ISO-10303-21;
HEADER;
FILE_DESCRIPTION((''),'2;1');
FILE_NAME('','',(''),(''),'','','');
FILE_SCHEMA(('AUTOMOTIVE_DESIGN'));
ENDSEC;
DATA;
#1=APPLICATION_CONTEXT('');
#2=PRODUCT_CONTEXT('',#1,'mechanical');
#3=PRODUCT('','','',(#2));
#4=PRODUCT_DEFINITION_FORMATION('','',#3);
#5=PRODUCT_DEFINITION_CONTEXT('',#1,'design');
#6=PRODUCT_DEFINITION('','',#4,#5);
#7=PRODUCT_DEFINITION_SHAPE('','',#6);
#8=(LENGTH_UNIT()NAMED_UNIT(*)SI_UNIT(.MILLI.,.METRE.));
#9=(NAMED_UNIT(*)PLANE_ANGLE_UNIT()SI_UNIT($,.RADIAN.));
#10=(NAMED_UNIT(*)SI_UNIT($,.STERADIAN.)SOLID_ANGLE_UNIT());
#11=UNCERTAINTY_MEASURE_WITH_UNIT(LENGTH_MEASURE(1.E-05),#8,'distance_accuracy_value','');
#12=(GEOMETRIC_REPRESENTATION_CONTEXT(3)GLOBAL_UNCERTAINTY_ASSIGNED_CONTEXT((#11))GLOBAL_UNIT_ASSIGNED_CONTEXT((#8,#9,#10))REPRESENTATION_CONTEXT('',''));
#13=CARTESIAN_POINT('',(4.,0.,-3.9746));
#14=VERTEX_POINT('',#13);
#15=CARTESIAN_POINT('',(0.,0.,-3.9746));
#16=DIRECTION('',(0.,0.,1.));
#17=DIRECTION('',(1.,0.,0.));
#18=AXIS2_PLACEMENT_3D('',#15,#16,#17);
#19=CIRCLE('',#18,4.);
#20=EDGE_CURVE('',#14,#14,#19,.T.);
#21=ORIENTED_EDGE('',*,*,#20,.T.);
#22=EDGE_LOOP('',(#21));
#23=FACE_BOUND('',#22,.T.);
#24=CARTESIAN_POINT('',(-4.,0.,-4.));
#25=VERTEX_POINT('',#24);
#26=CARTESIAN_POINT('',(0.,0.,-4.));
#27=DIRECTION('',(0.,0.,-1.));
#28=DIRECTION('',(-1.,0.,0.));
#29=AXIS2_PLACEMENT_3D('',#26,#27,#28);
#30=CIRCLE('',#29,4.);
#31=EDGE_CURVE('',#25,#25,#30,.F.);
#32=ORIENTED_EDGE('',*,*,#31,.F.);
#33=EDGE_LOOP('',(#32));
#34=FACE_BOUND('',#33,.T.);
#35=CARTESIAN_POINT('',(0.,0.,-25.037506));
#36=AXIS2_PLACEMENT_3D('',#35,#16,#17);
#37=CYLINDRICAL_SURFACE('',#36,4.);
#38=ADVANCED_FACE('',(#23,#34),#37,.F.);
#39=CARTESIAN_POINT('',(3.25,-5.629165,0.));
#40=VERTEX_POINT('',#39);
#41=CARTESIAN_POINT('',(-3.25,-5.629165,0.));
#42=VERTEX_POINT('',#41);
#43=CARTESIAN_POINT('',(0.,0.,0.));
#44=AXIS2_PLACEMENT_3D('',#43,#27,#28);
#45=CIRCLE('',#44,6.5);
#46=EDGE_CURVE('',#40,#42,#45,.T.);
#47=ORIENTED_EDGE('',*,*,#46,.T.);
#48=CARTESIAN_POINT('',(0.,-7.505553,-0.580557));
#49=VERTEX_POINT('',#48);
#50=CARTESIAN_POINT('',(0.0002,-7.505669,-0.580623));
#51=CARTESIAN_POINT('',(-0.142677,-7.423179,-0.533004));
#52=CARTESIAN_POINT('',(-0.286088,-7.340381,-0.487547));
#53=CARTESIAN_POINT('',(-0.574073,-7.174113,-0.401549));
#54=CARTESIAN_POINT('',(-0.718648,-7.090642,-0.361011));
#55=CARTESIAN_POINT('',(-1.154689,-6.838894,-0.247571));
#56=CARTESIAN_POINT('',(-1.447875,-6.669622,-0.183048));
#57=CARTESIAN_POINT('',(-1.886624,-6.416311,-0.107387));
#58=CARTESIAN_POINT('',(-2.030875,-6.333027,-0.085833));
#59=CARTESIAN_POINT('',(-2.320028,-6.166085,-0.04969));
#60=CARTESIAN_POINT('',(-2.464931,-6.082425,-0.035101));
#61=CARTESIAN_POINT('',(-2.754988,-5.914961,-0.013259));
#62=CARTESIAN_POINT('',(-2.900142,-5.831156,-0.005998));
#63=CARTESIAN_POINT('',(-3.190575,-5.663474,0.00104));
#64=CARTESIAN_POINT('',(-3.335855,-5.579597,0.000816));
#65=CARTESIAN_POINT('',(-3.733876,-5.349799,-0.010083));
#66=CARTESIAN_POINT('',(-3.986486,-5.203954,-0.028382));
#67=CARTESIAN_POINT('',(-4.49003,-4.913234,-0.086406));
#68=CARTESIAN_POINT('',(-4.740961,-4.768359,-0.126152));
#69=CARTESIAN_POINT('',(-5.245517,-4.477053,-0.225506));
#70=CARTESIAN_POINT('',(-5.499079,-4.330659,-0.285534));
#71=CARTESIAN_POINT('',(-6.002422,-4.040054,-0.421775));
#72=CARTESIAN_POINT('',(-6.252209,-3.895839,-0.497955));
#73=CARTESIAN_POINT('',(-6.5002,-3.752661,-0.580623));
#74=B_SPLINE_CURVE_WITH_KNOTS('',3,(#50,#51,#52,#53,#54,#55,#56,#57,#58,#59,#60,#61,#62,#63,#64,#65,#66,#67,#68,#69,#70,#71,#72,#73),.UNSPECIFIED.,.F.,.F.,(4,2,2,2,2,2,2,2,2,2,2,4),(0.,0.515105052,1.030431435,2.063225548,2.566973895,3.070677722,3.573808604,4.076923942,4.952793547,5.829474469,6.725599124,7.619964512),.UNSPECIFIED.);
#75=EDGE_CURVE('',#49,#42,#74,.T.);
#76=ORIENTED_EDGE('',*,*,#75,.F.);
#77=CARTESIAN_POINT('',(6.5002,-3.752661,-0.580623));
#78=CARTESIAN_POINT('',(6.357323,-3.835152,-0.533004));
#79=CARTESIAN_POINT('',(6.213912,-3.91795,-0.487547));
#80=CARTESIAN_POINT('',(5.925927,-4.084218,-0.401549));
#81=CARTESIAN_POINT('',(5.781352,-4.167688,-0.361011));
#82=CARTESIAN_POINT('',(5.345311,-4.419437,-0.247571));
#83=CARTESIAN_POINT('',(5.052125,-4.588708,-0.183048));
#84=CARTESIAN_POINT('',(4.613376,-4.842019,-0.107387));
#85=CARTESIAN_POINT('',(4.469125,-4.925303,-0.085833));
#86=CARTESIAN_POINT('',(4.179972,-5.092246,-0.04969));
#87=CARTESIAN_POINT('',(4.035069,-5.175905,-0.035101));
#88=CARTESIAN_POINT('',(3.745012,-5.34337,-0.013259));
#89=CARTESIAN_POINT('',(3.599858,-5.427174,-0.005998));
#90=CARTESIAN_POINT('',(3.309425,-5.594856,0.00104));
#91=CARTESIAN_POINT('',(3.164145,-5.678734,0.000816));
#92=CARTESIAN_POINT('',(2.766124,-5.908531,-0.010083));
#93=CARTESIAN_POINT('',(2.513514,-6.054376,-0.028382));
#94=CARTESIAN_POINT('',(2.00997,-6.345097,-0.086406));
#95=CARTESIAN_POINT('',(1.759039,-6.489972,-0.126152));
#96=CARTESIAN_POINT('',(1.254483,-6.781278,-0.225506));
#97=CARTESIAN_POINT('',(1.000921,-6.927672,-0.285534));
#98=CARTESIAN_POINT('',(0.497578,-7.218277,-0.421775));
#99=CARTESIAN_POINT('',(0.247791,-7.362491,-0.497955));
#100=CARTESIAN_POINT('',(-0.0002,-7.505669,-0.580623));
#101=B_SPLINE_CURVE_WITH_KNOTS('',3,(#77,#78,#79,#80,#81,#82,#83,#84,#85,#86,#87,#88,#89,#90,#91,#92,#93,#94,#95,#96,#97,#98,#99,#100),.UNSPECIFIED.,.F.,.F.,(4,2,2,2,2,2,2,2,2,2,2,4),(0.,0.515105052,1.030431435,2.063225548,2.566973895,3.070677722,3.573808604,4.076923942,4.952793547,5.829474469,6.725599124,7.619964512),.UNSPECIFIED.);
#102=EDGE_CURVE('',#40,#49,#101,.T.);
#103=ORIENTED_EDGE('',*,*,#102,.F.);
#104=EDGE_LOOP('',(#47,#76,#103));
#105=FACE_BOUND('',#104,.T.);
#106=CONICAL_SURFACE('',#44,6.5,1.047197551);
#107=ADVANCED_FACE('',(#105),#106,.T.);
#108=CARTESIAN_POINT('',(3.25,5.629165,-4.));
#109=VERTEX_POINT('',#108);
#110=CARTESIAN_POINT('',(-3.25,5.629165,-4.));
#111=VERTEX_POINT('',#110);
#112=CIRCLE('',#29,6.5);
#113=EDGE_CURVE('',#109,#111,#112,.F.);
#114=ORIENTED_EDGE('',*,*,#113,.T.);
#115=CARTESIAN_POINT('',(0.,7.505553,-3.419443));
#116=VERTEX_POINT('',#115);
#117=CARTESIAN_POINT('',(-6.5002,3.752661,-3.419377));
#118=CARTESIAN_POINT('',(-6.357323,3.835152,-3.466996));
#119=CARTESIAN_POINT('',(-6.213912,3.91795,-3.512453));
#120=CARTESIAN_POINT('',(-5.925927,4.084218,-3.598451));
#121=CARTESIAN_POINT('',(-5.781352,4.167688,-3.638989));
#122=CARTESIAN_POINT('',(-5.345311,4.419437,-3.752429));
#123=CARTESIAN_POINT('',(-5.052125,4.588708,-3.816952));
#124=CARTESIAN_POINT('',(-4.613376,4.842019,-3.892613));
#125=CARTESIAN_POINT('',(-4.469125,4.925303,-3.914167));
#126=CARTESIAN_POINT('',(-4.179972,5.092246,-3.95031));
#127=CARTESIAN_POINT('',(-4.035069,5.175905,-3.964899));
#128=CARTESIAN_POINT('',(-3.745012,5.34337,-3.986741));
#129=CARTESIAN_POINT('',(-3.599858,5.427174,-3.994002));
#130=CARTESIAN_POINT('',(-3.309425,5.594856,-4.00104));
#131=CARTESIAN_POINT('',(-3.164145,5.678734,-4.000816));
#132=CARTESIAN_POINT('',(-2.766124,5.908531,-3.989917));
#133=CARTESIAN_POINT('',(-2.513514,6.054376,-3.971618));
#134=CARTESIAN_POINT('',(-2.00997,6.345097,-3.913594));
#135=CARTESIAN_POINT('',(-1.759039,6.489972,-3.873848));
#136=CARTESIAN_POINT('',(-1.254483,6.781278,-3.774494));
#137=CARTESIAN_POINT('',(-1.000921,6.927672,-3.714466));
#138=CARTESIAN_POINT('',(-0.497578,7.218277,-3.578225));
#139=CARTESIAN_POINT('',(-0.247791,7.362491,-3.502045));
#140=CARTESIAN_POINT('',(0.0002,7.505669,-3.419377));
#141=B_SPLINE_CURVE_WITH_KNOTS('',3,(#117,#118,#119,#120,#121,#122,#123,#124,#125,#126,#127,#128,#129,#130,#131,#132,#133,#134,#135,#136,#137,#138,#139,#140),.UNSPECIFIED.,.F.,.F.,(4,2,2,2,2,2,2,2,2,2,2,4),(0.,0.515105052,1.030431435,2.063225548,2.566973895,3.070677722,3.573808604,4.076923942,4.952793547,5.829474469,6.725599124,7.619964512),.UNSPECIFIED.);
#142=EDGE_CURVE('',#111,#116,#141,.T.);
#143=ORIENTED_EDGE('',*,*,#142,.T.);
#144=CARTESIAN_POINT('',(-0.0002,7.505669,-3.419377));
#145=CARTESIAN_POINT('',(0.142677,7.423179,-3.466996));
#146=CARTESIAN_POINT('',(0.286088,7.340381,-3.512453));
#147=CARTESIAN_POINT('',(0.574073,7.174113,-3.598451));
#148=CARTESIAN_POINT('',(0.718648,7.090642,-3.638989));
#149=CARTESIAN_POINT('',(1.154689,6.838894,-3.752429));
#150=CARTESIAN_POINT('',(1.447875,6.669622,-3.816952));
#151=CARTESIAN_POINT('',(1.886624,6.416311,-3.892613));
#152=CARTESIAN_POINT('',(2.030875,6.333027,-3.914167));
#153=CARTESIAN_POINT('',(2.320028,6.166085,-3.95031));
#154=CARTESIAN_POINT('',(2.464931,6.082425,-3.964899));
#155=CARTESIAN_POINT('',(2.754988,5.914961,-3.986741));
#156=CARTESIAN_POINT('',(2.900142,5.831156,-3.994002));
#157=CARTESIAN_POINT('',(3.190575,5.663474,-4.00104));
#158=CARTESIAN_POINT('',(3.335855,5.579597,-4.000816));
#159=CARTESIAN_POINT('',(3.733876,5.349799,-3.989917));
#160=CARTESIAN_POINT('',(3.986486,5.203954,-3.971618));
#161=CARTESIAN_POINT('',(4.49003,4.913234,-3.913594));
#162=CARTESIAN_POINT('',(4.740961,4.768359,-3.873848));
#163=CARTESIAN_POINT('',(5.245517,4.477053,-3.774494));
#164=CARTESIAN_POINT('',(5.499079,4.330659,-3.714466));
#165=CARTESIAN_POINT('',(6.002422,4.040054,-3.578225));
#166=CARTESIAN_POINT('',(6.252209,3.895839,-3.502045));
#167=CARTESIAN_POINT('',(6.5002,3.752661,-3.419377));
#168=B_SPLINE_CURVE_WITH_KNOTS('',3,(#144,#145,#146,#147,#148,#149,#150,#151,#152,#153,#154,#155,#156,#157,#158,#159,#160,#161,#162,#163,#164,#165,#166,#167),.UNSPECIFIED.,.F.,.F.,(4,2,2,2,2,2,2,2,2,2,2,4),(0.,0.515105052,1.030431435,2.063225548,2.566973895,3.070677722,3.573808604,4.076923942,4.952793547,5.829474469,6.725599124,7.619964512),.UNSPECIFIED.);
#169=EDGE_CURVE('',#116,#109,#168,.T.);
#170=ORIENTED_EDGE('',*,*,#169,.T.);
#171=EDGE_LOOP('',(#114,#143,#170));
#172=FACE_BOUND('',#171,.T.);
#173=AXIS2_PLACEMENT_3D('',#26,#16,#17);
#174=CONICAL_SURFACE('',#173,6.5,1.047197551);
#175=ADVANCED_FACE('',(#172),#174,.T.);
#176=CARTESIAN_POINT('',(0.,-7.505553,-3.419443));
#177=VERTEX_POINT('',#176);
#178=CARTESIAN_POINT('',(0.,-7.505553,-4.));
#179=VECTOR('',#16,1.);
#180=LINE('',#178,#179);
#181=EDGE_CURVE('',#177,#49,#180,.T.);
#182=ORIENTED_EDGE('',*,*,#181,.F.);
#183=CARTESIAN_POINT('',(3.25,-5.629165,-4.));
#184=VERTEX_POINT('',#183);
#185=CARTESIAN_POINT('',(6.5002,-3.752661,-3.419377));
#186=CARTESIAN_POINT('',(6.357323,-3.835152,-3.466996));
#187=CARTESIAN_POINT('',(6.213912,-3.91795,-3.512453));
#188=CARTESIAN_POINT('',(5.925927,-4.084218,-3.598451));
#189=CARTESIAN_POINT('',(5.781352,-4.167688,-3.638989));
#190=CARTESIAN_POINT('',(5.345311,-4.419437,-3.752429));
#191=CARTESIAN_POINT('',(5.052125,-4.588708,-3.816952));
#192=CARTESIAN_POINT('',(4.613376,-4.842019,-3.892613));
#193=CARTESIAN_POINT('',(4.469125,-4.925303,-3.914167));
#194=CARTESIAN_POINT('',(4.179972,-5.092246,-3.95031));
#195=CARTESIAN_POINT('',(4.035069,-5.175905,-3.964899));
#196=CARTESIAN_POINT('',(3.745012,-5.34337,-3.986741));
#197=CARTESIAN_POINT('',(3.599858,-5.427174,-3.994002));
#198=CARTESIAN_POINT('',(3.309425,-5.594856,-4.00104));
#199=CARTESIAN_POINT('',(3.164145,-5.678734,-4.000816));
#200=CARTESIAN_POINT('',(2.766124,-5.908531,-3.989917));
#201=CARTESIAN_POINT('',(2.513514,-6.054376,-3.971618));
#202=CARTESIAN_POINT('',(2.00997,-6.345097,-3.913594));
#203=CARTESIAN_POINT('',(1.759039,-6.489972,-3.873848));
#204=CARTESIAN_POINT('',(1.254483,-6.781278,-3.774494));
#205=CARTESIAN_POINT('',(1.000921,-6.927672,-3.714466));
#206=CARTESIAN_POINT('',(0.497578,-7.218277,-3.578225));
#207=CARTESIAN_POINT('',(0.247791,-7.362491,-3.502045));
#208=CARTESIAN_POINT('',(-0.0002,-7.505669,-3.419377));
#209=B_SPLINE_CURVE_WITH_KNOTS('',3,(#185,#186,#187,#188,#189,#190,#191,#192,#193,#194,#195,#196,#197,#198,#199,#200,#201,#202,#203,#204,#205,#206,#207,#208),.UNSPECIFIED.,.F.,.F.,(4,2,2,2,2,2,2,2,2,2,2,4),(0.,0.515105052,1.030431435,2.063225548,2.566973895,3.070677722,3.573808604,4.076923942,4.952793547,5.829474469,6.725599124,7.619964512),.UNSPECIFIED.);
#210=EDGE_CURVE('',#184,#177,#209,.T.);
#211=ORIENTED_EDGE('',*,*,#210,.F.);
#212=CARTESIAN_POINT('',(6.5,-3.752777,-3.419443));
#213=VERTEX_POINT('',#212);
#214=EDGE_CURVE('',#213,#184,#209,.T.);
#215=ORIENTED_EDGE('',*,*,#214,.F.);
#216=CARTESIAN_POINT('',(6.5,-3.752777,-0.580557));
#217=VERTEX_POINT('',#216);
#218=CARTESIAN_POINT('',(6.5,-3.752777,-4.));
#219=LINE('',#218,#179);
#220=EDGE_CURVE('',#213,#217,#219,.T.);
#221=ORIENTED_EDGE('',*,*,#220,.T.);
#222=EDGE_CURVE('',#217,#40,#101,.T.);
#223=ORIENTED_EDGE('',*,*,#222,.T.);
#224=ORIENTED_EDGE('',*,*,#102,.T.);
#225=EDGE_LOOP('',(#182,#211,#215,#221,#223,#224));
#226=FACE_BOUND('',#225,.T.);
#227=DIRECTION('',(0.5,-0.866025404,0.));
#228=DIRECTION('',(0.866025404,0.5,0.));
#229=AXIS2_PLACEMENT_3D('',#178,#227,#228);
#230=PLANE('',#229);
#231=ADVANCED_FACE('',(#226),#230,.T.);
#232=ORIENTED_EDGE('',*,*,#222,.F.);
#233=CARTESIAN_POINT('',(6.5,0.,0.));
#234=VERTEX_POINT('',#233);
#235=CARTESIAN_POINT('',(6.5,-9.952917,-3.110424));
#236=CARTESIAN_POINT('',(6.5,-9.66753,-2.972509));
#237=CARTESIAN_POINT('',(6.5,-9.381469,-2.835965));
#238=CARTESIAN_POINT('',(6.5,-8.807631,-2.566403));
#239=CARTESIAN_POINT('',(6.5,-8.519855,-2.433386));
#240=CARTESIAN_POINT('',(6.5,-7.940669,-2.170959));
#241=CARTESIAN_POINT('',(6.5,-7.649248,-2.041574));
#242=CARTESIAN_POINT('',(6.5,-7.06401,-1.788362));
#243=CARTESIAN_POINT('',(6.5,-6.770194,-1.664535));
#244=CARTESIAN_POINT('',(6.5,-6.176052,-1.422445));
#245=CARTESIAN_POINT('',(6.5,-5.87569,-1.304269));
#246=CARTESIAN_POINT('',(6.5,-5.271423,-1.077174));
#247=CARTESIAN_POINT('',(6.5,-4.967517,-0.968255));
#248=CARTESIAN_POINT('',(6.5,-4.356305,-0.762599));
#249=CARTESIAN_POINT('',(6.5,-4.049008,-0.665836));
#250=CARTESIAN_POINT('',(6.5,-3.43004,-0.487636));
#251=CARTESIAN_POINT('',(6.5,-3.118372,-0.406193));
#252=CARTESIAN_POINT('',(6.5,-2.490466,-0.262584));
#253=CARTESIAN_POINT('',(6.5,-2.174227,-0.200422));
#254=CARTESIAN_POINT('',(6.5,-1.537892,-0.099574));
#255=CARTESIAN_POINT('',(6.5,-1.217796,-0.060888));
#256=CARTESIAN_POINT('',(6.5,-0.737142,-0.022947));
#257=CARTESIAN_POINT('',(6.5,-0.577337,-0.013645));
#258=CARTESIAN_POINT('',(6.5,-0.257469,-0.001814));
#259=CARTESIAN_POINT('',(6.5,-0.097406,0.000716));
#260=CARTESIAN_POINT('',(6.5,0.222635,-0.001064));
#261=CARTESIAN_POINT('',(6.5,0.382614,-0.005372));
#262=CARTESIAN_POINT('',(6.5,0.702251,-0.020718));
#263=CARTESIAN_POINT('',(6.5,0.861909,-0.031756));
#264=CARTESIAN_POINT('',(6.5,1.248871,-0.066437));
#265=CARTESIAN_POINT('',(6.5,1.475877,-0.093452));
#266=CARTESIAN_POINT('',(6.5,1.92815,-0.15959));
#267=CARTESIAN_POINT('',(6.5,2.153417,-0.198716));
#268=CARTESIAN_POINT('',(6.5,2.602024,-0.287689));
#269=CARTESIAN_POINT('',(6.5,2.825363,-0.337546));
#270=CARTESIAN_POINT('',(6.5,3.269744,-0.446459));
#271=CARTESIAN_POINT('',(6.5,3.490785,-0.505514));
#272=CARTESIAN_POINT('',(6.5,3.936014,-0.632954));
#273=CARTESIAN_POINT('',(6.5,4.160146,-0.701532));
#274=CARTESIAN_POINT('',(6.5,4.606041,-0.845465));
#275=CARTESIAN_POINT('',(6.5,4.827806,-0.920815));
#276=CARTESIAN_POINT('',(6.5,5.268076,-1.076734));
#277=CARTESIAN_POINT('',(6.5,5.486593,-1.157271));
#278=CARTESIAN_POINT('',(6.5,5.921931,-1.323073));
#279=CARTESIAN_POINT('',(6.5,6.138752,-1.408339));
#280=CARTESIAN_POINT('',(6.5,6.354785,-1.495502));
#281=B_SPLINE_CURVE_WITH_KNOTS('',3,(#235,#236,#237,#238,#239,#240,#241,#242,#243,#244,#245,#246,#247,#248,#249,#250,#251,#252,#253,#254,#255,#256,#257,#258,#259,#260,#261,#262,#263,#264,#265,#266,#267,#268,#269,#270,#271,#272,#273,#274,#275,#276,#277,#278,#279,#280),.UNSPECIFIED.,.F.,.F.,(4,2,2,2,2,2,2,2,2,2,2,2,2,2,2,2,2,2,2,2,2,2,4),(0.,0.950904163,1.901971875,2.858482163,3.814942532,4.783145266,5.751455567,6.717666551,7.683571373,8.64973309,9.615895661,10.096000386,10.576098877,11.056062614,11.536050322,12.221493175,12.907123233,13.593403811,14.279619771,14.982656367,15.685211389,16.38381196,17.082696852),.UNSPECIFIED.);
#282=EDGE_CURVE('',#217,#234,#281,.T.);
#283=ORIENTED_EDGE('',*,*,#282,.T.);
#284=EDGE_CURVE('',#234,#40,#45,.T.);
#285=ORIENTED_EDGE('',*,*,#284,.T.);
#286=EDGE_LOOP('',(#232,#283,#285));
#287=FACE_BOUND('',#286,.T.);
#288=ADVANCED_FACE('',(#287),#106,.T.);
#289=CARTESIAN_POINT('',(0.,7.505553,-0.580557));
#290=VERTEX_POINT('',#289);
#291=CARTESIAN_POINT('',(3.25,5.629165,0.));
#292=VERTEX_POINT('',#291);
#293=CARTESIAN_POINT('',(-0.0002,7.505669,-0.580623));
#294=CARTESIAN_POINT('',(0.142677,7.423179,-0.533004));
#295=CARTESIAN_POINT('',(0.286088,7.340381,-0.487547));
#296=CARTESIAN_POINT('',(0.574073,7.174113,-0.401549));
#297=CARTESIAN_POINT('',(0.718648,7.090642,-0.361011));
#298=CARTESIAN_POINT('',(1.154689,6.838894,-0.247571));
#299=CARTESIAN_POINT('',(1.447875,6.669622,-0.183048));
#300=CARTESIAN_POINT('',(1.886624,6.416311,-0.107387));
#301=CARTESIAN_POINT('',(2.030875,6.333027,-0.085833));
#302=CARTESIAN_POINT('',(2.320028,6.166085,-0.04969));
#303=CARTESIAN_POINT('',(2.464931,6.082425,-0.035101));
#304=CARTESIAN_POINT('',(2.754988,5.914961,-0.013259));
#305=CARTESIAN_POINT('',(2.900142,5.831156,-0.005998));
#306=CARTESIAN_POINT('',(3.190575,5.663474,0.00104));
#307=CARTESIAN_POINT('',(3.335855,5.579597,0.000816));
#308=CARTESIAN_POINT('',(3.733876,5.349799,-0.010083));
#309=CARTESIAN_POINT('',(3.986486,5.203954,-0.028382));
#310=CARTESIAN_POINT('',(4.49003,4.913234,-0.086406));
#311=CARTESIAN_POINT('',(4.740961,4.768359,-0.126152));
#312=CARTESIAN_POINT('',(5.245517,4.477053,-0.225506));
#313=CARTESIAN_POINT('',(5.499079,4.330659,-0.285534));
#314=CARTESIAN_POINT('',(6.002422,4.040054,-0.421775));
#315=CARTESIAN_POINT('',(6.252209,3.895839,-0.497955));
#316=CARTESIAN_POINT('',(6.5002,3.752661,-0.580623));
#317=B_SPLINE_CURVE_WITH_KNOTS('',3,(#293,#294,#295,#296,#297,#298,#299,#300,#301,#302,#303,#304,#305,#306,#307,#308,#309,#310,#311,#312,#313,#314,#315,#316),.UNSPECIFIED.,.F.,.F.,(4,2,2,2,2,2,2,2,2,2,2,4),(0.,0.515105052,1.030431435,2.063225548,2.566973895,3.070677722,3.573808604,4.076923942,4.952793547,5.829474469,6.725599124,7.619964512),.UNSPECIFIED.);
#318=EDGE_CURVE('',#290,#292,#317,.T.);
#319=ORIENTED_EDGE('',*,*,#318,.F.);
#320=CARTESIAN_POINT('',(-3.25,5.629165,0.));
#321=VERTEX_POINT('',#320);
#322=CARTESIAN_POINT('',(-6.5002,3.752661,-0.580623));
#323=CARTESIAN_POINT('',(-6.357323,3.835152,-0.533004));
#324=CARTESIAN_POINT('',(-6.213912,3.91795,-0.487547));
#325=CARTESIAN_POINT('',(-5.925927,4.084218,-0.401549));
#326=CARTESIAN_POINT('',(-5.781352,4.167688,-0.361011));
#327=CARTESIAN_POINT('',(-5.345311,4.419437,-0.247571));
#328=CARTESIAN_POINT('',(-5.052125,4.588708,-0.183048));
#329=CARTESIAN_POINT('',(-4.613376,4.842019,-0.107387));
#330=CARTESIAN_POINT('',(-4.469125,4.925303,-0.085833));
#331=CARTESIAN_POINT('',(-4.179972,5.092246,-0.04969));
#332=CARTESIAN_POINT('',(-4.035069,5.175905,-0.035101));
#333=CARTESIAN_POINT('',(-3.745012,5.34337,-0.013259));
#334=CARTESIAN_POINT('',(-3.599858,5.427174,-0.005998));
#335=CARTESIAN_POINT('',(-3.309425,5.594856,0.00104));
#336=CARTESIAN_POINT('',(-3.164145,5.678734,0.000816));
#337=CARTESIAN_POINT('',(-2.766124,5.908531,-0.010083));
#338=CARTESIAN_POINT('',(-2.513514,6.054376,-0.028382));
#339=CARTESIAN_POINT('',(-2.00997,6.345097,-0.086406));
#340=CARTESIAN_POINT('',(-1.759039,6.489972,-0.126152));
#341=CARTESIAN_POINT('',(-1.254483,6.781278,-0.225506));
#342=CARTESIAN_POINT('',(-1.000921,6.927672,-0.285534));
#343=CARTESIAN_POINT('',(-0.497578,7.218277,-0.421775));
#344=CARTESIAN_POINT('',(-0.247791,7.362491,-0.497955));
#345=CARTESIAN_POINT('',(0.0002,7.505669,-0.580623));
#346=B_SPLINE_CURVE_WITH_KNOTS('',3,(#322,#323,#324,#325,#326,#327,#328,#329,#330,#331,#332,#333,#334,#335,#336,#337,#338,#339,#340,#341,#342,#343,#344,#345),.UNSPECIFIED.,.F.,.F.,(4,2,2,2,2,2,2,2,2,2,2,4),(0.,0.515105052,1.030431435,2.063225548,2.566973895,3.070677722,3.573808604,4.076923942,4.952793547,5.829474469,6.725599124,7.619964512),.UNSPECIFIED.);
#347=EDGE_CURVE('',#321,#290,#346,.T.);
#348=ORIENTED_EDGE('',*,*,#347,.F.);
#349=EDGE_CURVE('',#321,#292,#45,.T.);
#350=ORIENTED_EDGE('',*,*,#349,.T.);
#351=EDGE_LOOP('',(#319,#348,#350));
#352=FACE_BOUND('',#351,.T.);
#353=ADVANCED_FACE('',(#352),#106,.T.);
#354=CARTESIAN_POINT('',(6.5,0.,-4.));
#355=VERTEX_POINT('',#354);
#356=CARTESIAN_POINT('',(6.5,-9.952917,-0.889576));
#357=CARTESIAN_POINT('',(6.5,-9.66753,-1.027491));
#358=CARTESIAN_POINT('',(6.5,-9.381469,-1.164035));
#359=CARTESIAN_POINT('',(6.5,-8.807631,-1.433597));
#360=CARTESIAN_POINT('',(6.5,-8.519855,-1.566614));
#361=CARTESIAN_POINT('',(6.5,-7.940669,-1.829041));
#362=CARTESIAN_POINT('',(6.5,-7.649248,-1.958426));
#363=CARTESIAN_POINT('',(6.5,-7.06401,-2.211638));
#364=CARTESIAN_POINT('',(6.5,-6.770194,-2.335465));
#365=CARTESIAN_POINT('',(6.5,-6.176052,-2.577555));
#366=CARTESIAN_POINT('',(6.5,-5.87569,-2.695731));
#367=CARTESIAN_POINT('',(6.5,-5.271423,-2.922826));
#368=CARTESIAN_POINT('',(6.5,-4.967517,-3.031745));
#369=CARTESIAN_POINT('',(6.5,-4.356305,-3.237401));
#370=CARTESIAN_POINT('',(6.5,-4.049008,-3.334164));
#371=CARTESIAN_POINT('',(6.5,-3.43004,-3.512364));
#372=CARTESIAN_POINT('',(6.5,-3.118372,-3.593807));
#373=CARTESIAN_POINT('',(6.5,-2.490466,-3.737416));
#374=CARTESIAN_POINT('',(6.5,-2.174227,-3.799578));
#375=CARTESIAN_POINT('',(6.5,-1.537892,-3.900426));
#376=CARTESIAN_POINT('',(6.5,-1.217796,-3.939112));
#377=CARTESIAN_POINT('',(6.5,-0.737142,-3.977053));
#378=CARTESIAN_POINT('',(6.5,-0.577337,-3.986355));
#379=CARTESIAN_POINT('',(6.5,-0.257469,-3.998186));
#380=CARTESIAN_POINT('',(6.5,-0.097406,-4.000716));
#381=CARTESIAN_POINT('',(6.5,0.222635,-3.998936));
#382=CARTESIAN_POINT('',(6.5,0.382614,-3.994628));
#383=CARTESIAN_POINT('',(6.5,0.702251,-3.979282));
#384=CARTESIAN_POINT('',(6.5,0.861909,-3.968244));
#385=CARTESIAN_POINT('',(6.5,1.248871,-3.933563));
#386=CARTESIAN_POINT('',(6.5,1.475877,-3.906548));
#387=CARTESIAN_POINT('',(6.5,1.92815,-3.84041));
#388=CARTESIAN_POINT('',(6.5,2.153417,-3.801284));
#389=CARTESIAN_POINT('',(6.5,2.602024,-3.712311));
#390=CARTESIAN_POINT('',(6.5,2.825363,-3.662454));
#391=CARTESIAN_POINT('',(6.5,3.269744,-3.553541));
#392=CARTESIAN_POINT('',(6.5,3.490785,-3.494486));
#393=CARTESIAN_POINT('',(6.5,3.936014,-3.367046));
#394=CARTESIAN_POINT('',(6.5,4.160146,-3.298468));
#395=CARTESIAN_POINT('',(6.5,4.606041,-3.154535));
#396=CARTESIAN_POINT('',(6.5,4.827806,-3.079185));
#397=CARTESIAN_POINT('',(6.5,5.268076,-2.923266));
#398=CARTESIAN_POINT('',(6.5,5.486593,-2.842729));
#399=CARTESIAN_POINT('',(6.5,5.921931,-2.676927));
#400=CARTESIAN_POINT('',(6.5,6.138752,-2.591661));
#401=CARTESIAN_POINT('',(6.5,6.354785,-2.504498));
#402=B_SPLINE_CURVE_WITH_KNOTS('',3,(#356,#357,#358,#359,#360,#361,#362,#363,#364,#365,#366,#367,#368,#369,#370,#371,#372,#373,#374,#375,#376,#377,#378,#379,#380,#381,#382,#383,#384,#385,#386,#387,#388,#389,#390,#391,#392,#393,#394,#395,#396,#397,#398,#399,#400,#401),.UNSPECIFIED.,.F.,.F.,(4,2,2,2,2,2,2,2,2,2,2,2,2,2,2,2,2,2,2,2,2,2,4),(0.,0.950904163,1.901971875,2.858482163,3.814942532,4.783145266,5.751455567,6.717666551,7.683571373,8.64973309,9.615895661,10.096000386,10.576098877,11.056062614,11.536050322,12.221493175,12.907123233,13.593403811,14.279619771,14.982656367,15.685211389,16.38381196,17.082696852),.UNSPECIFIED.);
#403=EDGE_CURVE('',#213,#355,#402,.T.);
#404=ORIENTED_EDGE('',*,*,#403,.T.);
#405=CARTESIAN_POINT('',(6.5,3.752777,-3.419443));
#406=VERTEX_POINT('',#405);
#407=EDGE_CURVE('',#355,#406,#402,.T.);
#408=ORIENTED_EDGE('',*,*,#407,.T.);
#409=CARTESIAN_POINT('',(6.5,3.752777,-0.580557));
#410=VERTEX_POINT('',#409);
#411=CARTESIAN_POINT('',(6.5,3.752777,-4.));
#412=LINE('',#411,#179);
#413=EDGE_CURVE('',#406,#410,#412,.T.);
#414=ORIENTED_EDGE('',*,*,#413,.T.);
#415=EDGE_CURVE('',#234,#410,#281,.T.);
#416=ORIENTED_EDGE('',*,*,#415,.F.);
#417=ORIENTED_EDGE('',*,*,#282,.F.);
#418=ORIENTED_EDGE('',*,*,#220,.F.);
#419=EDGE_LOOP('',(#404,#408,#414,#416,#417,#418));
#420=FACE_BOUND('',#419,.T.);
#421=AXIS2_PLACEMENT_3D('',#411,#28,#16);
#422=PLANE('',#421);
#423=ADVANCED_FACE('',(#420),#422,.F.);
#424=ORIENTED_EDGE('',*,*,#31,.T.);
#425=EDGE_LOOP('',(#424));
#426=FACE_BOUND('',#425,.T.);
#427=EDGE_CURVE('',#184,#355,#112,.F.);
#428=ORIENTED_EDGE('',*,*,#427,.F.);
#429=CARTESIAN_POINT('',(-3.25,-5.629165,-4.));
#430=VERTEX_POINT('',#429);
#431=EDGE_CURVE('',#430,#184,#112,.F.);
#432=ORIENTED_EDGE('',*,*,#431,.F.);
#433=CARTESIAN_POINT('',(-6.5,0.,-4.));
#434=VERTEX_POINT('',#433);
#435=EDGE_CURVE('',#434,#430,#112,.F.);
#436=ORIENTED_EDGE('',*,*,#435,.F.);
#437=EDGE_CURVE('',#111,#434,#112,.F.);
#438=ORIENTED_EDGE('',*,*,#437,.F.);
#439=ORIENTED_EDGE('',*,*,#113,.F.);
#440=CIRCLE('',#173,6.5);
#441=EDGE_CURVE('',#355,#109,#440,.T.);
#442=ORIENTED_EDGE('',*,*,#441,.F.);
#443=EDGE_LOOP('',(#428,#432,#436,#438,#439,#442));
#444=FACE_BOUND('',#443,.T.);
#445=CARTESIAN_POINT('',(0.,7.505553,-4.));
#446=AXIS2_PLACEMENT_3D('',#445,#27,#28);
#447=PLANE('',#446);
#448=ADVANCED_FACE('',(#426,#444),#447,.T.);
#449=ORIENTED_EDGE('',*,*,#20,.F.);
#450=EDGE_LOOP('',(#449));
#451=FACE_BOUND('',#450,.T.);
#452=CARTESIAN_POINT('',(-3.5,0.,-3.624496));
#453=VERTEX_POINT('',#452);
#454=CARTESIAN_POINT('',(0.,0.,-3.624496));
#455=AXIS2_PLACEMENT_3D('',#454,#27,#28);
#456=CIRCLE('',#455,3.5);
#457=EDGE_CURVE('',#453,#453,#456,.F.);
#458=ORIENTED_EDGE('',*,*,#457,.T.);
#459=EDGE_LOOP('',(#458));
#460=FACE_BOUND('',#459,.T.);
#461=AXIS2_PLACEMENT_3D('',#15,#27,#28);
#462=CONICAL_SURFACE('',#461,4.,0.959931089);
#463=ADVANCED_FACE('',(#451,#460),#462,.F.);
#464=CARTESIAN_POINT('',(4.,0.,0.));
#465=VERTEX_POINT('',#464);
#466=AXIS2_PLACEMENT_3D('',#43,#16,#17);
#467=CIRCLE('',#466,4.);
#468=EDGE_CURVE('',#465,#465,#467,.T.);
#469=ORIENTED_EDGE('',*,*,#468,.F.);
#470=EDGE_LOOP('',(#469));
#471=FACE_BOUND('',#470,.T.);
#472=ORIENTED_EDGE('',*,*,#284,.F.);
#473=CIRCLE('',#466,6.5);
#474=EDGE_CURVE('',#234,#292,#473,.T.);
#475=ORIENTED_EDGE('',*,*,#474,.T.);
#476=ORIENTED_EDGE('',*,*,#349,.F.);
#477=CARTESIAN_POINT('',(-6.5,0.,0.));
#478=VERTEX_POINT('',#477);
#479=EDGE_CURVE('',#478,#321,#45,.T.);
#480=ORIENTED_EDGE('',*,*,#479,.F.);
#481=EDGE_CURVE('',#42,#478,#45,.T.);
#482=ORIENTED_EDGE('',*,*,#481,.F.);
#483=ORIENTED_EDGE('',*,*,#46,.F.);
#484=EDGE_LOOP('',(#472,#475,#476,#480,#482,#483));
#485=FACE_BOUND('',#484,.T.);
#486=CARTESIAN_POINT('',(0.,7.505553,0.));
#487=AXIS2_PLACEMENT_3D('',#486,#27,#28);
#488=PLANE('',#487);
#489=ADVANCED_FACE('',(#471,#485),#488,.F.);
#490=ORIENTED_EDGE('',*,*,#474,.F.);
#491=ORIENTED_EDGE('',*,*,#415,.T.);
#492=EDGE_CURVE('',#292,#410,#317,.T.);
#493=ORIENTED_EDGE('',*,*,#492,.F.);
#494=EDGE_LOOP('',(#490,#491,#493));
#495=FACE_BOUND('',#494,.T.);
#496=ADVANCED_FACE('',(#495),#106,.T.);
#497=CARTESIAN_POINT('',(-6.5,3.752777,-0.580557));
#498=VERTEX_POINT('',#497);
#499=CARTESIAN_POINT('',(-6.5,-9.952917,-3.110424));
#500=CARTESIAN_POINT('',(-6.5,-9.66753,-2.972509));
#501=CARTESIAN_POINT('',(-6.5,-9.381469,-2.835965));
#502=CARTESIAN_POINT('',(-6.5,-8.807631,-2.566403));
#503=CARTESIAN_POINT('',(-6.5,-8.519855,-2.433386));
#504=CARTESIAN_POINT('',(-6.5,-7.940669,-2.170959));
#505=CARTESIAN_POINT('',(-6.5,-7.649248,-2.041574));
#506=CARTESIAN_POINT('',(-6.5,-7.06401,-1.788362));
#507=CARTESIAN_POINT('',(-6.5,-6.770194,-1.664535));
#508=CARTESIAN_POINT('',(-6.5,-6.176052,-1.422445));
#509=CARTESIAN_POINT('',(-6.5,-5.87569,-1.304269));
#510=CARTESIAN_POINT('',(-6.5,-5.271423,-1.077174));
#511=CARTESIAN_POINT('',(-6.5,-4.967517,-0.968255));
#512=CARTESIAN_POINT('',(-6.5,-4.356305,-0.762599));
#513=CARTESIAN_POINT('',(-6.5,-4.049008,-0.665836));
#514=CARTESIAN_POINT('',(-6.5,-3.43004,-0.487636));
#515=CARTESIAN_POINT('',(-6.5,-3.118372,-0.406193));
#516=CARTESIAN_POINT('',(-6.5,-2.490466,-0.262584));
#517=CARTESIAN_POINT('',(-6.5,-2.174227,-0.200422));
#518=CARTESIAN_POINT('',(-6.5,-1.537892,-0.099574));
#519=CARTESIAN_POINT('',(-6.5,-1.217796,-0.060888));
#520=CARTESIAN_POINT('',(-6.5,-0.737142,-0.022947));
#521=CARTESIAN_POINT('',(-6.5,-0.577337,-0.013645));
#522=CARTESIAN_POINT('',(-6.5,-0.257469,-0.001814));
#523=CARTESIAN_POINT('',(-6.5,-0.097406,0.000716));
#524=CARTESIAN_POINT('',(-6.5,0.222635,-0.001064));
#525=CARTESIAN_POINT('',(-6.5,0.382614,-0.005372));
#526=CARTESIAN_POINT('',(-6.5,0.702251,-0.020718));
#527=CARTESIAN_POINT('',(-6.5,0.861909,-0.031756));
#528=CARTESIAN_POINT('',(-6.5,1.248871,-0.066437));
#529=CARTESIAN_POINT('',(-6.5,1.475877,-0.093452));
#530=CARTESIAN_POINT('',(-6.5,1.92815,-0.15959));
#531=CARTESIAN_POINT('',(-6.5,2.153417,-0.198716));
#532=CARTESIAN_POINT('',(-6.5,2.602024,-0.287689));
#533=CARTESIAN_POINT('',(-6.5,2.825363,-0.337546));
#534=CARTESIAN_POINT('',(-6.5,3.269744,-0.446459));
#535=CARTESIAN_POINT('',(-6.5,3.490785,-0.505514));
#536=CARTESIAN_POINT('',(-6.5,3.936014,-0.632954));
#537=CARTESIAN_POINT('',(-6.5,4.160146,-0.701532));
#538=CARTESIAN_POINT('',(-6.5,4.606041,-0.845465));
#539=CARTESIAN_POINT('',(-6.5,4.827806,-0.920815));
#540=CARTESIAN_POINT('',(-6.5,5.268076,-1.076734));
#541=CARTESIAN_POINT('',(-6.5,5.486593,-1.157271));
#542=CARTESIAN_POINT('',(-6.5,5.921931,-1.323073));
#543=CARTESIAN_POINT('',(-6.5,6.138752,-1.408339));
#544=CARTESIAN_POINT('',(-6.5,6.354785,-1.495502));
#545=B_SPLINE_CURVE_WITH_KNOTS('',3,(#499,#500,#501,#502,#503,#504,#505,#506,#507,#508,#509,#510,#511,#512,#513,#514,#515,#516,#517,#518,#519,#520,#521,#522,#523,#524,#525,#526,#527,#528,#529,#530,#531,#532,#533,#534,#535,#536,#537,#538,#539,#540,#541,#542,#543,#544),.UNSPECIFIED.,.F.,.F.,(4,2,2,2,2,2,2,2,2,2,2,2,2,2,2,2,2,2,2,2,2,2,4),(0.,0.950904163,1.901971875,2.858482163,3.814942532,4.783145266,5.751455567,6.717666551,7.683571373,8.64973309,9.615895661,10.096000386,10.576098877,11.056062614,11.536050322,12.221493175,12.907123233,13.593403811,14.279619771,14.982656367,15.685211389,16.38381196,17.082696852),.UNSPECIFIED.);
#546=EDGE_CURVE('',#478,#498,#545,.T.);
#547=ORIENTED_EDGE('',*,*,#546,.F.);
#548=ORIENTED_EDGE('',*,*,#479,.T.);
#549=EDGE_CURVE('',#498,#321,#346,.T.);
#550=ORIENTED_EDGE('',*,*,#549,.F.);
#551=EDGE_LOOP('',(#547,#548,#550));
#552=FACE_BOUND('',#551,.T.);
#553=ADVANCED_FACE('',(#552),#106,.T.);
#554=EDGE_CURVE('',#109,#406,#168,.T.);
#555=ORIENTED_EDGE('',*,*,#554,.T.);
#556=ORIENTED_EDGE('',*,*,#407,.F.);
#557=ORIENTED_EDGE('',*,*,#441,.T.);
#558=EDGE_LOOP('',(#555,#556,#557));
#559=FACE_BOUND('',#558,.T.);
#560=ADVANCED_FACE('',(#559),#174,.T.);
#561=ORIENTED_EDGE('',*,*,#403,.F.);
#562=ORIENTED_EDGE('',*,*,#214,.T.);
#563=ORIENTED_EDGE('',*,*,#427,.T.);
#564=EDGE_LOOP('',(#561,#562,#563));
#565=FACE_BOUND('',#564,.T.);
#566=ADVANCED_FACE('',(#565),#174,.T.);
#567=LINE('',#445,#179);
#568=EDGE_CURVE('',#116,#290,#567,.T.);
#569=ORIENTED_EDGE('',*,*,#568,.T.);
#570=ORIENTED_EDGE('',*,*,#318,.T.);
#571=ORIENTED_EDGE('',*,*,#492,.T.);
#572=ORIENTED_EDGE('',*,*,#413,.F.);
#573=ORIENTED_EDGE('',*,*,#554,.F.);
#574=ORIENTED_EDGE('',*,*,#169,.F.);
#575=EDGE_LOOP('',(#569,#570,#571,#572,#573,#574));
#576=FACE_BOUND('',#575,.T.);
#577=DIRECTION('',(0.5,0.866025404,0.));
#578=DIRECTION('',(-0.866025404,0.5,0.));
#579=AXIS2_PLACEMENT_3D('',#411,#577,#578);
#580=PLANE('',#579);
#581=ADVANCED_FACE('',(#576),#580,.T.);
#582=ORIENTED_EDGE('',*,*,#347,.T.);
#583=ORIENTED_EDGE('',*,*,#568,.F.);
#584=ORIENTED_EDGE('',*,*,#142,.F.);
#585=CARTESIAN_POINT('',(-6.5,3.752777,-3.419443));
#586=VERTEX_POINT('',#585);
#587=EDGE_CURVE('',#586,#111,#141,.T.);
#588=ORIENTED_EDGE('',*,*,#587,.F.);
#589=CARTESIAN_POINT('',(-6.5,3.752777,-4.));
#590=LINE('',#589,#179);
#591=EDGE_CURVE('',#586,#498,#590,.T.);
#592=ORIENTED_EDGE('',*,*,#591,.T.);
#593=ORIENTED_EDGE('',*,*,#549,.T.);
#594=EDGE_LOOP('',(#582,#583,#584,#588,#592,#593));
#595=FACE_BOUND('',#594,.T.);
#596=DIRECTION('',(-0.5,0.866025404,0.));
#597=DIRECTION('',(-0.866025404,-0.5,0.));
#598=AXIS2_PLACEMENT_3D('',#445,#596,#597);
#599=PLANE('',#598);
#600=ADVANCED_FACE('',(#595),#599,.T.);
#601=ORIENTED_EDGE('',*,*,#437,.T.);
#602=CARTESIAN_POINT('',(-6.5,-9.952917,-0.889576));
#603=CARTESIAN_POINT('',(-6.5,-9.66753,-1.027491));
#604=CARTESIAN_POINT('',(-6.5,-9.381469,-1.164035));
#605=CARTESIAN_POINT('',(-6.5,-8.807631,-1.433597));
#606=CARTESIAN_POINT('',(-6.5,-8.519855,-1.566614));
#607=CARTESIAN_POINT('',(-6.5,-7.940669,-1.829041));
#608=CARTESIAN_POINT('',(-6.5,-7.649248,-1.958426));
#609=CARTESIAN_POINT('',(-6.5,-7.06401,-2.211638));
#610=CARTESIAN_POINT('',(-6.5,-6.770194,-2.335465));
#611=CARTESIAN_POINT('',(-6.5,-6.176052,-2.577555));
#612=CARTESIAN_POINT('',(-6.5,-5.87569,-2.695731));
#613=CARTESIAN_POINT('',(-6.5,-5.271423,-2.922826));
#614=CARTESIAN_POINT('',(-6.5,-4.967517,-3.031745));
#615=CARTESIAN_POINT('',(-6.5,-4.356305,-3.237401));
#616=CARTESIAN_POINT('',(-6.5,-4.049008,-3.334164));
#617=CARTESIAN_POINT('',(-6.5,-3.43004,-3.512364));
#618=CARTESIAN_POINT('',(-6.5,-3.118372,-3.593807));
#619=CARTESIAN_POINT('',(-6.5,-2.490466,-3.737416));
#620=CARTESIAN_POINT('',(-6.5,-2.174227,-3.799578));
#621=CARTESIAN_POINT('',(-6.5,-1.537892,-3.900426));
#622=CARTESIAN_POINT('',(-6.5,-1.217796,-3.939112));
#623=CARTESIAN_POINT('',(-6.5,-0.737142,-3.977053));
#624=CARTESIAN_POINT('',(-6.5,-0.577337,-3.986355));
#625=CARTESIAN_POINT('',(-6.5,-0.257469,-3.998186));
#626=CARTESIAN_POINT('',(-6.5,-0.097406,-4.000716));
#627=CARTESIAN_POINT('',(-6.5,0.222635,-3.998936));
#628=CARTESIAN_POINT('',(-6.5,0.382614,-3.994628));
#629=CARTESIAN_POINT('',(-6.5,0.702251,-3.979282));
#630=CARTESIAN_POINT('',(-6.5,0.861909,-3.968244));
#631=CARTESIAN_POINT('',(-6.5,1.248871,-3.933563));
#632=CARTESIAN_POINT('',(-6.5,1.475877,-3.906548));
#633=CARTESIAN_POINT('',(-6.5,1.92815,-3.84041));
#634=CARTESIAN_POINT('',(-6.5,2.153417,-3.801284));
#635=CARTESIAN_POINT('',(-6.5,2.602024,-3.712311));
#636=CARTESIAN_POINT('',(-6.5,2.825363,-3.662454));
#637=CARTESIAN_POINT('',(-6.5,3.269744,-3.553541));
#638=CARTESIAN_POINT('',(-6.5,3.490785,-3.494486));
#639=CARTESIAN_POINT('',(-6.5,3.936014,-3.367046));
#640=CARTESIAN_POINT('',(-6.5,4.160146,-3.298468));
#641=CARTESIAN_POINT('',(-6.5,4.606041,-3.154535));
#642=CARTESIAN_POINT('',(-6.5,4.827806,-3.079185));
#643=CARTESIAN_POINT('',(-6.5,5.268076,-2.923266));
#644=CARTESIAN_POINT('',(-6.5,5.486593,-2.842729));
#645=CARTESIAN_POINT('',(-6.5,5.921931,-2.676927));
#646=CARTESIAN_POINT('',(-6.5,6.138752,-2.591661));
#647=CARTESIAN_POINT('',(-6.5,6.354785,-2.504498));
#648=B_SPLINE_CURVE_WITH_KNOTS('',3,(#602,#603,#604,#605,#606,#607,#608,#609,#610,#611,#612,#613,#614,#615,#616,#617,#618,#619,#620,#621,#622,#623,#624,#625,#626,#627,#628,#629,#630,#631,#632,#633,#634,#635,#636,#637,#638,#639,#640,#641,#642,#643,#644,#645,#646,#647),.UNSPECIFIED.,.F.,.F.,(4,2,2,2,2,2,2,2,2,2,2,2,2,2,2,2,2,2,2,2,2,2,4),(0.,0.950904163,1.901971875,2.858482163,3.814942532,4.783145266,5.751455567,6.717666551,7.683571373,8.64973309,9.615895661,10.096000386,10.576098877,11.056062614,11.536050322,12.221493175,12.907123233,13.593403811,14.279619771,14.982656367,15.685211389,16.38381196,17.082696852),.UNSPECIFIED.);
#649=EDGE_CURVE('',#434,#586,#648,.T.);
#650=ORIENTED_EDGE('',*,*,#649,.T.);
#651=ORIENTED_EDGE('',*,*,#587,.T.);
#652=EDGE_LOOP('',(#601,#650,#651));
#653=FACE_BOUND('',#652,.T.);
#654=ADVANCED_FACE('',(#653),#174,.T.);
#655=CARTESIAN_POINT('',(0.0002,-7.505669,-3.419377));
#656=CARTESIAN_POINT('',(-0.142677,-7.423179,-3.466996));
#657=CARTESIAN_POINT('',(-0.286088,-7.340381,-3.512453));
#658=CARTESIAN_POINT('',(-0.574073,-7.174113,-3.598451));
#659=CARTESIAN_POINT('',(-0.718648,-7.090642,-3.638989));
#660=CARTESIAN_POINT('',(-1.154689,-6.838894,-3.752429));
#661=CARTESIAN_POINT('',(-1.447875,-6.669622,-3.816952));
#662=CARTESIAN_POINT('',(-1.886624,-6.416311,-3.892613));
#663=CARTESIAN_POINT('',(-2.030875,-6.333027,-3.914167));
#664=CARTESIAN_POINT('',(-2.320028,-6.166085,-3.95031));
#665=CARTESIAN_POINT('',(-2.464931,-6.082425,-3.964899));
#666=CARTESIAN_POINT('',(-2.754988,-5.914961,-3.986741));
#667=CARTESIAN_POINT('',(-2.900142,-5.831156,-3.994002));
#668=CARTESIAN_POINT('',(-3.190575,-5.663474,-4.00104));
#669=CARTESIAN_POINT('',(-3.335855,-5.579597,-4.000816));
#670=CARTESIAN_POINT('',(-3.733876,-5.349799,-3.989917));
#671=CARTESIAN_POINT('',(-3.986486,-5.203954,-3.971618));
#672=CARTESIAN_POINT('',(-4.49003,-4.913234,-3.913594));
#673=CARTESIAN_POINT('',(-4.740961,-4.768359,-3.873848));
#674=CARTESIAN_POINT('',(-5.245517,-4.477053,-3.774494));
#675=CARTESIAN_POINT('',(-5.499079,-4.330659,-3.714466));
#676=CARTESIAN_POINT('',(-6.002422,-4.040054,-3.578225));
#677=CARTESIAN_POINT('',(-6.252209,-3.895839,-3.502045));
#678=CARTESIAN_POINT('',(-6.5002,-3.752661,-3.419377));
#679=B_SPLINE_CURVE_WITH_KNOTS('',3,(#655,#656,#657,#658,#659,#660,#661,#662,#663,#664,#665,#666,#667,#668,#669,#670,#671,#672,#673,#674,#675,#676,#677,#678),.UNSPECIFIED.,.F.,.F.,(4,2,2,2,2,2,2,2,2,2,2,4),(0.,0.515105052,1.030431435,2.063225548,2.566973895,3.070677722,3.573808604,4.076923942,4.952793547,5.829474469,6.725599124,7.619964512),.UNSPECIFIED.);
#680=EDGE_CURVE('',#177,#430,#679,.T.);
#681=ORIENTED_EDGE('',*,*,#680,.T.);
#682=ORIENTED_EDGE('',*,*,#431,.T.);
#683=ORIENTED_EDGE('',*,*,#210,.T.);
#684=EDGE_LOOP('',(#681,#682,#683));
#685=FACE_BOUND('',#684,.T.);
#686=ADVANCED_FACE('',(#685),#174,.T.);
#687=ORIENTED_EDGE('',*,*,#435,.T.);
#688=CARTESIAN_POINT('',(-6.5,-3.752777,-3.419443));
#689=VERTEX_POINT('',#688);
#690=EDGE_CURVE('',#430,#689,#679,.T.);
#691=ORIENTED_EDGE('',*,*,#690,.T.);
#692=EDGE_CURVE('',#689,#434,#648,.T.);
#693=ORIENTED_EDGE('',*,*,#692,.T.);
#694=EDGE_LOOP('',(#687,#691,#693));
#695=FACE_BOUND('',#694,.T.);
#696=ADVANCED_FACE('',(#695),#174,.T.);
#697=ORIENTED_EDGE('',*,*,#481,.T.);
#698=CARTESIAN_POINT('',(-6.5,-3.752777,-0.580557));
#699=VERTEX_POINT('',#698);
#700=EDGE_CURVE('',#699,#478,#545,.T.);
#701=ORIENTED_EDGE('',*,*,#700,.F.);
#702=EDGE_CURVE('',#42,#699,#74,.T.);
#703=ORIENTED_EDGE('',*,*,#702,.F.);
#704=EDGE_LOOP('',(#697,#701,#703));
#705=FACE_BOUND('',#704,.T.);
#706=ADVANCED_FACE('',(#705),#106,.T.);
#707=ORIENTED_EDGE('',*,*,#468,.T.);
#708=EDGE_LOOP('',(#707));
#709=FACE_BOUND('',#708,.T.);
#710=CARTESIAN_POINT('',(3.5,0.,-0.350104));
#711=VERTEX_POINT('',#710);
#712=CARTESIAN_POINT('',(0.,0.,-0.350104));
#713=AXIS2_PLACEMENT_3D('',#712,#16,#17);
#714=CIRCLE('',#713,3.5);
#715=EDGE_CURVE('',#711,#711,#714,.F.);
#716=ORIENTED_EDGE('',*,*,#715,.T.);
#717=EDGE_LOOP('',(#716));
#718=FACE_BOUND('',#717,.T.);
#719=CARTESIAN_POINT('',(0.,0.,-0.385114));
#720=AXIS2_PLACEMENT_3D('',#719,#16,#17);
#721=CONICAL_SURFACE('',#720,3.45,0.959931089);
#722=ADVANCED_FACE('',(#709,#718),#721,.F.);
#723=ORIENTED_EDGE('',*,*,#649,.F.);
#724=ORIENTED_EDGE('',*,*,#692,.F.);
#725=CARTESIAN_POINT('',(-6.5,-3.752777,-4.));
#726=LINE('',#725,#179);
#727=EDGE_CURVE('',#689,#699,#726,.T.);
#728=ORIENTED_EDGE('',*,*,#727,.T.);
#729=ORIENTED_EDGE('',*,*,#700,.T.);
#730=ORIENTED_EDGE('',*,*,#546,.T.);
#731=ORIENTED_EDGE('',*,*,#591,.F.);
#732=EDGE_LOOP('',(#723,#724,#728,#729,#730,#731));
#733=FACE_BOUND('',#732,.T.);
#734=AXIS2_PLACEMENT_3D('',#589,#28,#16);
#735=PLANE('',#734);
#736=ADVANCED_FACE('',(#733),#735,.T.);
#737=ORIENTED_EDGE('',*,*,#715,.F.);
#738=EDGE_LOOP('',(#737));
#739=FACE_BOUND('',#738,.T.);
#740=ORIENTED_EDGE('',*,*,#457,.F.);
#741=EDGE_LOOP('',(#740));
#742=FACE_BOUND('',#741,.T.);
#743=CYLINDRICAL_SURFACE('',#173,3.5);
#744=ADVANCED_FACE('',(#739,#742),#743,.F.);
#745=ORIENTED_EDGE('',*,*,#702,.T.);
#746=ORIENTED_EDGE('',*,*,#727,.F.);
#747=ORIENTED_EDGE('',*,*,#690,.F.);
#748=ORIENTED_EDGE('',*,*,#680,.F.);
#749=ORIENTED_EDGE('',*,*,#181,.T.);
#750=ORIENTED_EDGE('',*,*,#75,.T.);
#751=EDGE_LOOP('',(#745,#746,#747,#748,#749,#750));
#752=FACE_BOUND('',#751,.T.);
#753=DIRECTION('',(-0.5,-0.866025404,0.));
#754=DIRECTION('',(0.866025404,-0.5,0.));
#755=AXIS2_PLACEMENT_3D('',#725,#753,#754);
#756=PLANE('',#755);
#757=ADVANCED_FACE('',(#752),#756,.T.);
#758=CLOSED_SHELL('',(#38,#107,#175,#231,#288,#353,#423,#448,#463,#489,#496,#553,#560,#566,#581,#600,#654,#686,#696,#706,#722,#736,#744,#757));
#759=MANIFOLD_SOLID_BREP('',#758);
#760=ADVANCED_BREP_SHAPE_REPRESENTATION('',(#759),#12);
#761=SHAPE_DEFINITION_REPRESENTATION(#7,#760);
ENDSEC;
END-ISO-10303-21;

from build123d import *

# Parameters (mm, degrees)
BASENUTSKE_R  = 3.5
BASENUT_DEPTH = 4


# Read off the part's stored shape, not the designer's step: ThreadSchematic
with BuildPart() as part:
    # BaseNutSke → BaseNut (new body)
    with BuildSketch(Plane.XY):
        Polygon((6.5, 3.75277675), (6.5, -3.75277675), (0, -7.505553499), (-6.5, -3.75277675), (-6.5, 3.75277675), (0, 7.505553499), align=None)
        Circle(BASENUTSKE_R, mode=Mode.SUBTRACT)
    extrude(amount=-BASENUT_DEPTH)

    # Sketch3 → Double-Chamfer (revolve, cut)
    with BuildSketch(Plane(origin=(0, 0, 0), x_dir=(0, 0, -1), z_dir=(1, 0, 0))):
        Polygon((4, 6.5), (3.419443416, 7.505553499), (3.419443416, 17.505553499), (14, 17.505553499), (14, 6.5), align=None)
        Polygon((0.580556584, 17.505553499), (-10, 17.505553499), (-10, 6.5), (0, 6.5), (0.580556584, 7.505553499), align=None)
    revolve(axis=Axis((0, 0, 0), (0, 0, -1)), mode=Mode.SUBTRACT)

    # ThreadSchematic outline → ThreadSchematic (revolve, cut)
    with BuildSketch(Plane.XZ):
        Polygon((3.5, 0), (3.5, -0.350103769), (4, 0), align=None)
        Polygon((4, -3.9746), (3.5, -3.624496231), (3.5, -4), (4, -4), align=None)
    revolve(axis=Axis((0, 0, 0), (0, 0, 1)), mode=Mode.SUBTRACT)


solid = part.part
